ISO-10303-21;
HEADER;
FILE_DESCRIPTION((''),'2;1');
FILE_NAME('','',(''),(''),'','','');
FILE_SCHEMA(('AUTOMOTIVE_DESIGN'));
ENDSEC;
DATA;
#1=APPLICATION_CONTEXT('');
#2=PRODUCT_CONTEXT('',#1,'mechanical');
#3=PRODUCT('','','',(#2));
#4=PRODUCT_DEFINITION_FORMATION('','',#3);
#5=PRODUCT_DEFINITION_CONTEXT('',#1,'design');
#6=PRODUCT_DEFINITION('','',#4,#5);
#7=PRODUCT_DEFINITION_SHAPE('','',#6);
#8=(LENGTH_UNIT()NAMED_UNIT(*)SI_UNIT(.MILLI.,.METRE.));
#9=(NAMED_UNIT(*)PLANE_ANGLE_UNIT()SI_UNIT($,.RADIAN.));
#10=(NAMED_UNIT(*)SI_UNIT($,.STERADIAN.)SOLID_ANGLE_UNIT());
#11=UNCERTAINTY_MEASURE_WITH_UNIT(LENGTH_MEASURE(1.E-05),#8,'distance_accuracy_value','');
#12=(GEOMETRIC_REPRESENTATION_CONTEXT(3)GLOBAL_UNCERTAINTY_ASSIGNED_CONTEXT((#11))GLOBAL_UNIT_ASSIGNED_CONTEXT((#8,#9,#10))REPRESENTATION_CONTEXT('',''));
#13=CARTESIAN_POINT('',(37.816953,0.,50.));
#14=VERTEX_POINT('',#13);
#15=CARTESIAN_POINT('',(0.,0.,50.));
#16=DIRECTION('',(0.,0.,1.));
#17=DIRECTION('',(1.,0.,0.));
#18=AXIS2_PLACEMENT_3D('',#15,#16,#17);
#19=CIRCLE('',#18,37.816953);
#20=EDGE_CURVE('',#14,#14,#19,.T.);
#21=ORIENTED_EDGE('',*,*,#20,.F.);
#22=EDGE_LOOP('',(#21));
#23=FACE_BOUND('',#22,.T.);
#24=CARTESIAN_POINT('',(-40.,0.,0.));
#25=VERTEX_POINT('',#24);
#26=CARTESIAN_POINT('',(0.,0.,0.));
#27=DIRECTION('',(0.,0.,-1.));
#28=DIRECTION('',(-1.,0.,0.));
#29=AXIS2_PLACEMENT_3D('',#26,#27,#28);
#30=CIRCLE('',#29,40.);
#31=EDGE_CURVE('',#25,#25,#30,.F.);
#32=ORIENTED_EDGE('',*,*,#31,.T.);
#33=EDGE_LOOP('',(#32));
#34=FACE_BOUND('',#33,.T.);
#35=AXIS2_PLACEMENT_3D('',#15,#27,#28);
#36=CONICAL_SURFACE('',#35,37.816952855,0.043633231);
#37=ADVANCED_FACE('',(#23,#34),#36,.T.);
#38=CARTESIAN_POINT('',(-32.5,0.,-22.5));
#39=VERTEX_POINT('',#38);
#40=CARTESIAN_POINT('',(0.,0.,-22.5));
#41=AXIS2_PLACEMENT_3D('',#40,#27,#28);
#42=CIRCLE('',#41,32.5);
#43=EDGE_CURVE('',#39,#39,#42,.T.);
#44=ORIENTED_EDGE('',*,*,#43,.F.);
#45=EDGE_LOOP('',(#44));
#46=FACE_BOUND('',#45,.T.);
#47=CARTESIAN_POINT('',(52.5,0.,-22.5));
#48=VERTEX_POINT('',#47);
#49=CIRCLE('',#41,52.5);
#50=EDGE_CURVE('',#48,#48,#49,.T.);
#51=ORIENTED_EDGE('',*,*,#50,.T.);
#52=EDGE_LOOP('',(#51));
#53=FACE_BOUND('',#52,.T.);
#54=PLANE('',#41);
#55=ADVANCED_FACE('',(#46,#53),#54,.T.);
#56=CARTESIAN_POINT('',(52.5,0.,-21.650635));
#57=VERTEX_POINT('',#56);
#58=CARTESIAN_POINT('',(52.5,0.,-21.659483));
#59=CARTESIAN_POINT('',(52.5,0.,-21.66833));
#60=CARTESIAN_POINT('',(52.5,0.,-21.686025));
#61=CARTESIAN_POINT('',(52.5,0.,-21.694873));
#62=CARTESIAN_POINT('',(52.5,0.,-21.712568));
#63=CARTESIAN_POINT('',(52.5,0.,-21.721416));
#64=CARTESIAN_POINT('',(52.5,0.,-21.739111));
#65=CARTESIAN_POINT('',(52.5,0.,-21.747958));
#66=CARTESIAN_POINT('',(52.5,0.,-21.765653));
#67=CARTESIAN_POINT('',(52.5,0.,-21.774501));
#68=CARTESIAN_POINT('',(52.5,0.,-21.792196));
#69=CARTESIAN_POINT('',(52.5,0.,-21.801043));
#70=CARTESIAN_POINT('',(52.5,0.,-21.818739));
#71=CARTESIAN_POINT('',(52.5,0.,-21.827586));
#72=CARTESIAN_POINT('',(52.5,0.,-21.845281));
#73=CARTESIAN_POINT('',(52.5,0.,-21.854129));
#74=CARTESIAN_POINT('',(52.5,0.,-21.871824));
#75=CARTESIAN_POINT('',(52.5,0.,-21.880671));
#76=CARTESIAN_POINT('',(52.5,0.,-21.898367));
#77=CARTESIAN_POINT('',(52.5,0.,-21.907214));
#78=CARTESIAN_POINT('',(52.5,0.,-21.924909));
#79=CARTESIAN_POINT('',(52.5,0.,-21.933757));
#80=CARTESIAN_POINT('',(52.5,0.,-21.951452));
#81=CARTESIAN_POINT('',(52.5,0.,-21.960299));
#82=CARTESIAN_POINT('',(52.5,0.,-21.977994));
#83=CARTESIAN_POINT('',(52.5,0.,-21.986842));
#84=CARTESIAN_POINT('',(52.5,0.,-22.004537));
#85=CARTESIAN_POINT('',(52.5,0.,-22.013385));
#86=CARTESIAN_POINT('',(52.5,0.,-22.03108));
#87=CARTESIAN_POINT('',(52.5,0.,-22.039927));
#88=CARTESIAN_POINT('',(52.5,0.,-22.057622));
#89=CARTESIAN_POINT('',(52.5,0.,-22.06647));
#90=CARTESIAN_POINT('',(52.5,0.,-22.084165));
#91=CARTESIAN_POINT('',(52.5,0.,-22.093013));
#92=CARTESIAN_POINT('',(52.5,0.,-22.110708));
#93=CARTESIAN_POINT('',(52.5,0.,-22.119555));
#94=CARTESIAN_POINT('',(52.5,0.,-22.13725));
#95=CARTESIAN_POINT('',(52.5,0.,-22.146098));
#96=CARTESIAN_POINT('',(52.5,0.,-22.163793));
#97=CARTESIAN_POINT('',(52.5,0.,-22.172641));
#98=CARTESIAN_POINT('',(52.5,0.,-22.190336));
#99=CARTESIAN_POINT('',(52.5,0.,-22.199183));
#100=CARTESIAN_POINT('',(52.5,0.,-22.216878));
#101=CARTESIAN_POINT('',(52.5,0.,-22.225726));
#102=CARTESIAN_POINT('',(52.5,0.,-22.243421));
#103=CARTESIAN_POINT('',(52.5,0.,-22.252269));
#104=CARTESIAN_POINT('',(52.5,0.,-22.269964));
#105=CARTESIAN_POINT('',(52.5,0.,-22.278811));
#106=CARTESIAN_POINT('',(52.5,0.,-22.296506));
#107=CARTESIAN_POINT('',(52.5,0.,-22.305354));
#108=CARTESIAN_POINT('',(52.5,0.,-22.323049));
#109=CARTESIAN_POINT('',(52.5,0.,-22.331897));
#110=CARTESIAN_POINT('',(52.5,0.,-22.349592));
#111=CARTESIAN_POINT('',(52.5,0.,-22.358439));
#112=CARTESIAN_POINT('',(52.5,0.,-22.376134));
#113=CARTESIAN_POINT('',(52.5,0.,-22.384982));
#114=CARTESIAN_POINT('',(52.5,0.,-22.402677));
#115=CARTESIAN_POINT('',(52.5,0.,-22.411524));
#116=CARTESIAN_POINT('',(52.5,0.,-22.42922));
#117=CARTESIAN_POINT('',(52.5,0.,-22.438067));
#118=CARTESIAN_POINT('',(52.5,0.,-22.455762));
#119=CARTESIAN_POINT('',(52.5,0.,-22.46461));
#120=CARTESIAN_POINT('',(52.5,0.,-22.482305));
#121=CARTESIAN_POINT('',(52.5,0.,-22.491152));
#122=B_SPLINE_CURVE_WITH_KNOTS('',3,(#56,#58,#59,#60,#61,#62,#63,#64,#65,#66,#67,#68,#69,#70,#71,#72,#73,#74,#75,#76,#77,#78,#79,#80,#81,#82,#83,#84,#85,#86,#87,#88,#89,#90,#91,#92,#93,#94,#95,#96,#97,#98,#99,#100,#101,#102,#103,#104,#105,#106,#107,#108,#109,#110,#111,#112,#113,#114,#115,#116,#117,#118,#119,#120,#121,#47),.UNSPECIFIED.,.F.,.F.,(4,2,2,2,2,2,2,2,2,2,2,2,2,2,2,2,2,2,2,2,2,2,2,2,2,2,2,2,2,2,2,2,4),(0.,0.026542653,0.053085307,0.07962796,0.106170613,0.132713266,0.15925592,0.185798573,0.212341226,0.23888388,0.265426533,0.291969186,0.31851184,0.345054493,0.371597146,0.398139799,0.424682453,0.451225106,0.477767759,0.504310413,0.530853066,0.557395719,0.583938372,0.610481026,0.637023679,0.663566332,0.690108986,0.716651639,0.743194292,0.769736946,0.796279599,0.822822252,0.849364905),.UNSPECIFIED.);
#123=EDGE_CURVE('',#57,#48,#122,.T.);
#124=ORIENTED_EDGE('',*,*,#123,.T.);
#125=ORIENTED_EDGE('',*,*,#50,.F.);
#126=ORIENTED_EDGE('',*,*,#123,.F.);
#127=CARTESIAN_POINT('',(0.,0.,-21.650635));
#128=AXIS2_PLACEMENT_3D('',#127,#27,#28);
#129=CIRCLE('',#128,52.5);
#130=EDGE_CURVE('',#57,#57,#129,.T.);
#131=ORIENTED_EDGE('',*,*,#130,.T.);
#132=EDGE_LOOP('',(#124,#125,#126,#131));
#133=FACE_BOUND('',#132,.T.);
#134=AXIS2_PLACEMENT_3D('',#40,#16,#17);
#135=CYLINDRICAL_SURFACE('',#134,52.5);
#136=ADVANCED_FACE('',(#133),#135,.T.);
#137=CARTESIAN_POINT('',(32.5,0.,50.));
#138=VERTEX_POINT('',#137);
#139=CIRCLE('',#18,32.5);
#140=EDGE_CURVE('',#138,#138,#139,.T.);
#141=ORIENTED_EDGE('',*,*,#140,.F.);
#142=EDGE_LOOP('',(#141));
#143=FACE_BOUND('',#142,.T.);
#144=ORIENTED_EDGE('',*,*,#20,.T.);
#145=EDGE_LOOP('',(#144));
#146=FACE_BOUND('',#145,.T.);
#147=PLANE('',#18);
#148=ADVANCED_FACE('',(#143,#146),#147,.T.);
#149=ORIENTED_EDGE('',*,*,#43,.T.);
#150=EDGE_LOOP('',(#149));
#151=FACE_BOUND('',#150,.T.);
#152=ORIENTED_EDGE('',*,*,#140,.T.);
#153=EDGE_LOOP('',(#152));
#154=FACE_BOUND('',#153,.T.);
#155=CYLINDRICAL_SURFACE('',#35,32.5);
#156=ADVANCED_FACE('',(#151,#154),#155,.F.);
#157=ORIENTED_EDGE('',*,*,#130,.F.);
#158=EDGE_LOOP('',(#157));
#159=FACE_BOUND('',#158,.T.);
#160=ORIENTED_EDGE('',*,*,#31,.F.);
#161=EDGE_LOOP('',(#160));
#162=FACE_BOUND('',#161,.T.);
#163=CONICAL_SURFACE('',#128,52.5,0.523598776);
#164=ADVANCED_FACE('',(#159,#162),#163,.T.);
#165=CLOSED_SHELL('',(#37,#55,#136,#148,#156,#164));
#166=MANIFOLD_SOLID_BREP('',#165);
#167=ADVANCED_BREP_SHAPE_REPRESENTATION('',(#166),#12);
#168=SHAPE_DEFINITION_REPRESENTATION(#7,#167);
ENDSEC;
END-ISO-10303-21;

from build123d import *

# Parameters (mm, degrees)
SKETCH1_R           = 40
SKETCH1_R_2         = 32.5
BOSS_EXTRUDE1_DEPTH = 50
CHAMFER1_SIZE       = 50
CHAMFER1_SIZE_2     = 2.183047145
BOSS_EXTRUDE2_START = 22.5
SKETCH2_R           = 52.5
SKETCH2_R_2         = 32.5
BOSS_EXTRUDE2_DEPTH = 22.5
CHAMFER2_SIZE2      = 21.650635095
CHAMFER2_SIZE       = 12.5


# Some blends are built 0.0001 mm under size
with BuildPart() as part:
    # Sketch1 → Boss-Extrude1 (new body)
    with BuildSketch(Plane.XY):
        Circle(SKETCH1_R)
        Circle(SKETCH1_R_2, mode=Mode.SUBTRACT)
    extrude(amount=BOSS_EXTRUDE1_DEPTH)

    # Chamfer1
    # the kernel refuses this chamfer: 50, 2.183047145 mm, written as the material it takes off along each edge
    with BuildSketch(Plane(origin=(0, 0, 50), x_dir=(1, 0, 0), z_dir=(0, -1, 0))) as chamfer1_piece_1:
        Polygon((40, -CHAMFER1_SIZE), (40 - CHAMFER1_SIZE_2, 0), (40, 0), align=None)
    revolve(axis=Axis((0, 0, 50), (0, 0, 1)), mode=Mode.SUBTRACT)

    # Sketch2 → Boss-Extrude2 (add)
    with BuildSketch(Plane(origin=(0, 0, 0), x_dir=(-1, 0, 0), z_dir=(0, 0, -1)).offset(BOSS_EXTRUDE2_START)):
        with Locations(Location((0, 0, 0), (0, 0, 180))):
            Circle(SKETCH2_R)
        Circle(SKETCH2_R_2, mode=Mode.SUBTRACT)
    extrude(amount=-BOSS_EXTRUDE2_DEPTH)

    # Chamfer2
    chamfer2_edges = [part.edges().sort_by_distance(p)[0] for p in [
        (-52.5, 0, 0),
    ]]
    chamfer2_side = [part.faces().sort_by_distance(p)[0] for p in [
        (-52.25, 0, 0),
    ]]
    chamfer(chamfer2_edges, length=CHAMFER2_SIZE - 0.0001, length2=CHAMFER2_SIZE2 - 0.0001, reference=chamfer2_side[0])  # a hair under: the kernel refuses the full size


solid = part.part
